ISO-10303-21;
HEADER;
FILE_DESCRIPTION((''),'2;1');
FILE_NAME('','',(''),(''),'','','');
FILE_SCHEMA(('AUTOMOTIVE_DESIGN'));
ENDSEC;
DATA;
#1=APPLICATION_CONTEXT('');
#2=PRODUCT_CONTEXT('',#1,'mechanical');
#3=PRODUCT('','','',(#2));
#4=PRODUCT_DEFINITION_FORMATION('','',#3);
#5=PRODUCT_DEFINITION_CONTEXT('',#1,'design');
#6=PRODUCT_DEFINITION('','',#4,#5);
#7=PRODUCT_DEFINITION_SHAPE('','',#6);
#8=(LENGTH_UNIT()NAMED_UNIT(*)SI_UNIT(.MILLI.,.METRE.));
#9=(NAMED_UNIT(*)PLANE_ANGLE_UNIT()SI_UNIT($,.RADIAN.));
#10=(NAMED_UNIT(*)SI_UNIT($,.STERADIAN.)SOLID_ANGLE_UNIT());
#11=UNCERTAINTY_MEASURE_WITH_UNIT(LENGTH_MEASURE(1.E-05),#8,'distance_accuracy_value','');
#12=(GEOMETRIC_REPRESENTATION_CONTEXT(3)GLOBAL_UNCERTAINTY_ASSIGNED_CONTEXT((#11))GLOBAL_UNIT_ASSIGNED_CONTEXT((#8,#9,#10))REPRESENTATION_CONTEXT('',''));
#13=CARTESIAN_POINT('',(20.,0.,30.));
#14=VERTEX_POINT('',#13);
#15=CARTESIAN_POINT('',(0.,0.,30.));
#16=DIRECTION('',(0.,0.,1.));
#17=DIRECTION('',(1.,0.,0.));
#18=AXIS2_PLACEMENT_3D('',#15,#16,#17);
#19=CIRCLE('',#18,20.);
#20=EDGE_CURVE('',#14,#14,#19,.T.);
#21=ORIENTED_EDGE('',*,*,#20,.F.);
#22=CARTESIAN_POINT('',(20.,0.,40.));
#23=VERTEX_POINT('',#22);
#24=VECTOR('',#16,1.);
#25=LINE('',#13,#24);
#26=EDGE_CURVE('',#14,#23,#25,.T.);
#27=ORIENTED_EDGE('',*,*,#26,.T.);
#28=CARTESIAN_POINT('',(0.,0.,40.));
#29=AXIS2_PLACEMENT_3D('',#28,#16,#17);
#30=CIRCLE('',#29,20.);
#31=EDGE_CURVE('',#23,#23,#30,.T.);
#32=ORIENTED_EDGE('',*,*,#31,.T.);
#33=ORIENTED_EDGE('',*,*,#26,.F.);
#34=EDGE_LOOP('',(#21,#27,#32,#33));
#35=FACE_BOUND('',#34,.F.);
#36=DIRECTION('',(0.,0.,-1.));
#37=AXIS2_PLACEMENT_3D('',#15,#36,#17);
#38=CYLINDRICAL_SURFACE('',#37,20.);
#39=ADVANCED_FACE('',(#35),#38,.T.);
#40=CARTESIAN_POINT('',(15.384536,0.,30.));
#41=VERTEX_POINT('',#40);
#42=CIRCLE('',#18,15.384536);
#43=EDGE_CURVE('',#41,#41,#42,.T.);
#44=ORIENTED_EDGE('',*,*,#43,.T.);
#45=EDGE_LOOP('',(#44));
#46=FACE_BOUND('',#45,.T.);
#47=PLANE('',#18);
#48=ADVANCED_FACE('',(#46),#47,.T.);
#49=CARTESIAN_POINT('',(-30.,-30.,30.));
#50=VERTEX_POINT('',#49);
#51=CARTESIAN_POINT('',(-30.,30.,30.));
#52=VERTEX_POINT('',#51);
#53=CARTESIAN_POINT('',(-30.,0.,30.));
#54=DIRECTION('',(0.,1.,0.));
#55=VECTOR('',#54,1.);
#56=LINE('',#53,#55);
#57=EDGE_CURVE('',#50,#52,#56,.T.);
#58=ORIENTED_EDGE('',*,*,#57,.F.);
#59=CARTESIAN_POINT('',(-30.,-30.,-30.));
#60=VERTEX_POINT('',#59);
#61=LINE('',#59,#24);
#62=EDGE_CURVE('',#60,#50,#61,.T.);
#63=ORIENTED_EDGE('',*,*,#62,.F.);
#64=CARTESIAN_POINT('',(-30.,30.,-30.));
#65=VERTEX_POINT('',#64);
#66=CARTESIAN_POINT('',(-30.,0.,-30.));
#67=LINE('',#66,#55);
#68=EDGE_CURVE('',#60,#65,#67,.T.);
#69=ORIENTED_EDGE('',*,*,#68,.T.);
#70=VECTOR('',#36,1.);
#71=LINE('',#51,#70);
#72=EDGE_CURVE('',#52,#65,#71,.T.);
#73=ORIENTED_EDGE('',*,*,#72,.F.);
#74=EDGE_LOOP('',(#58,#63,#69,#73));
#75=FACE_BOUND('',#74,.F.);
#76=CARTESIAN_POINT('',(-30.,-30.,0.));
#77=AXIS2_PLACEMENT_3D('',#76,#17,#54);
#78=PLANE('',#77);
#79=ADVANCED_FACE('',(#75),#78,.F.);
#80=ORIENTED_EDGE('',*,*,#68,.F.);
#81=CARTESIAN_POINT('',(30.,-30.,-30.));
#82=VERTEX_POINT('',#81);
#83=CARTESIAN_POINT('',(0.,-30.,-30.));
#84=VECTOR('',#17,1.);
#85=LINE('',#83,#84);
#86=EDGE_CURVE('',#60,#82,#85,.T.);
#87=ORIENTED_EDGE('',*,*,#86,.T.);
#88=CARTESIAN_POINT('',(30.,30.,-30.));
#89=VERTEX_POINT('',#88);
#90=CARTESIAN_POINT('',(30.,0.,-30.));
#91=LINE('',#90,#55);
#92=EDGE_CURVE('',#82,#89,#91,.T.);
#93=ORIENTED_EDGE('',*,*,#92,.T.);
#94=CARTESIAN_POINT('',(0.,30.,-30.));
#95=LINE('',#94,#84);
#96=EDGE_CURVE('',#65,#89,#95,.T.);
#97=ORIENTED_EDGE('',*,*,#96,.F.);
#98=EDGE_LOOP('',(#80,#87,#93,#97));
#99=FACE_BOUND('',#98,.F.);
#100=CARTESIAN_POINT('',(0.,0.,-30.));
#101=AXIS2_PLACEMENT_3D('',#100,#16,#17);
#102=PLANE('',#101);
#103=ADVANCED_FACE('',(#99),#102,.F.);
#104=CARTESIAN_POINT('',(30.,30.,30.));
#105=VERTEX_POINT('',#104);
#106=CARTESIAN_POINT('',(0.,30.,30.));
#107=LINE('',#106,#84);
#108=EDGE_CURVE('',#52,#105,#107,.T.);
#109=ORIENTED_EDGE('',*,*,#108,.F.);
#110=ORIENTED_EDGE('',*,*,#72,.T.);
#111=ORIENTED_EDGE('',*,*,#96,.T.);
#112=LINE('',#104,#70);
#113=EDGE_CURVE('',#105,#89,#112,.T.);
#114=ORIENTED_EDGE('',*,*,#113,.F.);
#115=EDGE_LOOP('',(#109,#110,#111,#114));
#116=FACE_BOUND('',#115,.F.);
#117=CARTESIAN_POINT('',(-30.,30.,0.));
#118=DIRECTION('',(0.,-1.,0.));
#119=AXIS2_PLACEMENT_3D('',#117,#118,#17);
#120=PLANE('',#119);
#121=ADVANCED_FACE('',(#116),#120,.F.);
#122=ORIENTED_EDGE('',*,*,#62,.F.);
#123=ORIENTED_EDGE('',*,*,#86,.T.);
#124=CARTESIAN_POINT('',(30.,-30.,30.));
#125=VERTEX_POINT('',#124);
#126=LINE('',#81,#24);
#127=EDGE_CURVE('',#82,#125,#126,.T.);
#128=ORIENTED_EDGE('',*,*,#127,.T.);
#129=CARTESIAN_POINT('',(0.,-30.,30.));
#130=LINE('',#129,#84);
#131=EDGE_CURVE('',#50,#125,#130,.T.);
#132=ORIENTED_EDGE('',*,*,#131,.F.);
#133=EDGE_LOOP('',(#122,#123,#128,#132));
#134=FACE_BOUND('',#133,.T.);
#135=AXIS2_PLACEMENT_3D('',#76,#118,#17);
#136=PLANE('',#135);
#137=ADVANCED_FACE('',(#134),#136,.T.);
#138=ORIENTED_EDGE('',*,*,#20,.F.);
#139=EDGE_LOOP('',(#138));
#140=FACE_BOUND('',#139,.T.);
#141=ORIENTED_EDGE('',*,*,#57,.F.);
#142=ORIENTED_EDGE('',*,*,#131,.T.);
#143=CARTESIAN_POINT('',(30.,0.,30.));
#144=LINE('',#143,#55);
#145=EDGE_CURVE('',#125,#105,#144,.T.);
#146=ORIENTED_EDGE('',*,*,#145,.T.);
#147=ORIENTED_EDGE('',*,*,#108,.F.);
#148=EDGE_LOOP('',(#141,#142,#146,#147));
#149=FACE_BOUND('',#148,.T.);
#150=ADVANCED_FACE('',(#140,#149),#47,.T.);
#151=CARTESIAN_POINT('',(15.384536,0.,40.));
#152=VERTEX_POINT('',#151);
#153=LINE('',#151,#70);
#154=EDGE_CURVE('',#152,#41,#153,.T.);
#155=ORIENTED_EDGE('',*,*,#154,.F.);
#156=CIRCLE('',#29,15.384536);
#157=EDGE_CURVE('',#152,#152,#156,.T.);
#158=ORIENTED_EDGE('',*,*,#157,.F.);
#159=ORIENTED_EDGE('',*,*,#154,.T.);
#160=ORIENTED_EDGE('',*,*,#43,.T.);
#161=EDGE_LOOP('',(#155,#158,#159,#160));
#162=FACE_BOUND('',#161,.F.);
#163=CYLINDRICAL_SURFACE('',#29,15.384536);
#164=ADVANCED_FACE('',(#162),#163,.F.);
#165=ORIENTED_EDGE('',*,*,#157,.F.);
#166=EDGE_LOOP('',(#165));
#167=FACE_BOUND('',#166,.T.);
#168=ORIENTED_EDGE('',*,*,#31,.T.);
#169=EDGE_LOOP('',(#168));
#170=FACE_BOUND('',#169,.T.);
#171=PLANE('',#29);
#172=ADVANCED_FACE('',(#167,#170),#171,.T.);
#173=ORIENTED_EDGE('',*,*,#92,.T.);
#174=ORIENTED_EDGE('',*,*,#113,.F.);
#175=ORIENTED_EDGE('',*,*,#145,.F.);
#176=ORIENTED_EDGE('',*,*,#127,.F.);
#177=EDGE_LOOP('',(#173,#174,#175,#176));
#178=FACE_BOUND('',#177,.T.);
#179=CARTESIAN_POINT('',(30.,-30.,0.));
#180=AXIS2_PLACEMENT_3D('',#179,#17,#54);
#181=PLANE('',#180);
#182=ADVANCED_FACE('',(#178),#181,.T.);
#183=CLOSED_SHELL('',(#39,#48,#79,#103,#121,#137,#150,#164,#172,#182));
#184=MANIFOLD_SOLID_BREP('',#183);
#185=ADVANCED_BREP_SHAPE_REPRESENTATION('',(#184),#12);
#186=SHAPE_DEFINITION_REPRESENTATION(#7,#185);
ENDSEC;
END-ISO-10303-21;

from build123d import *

# Parameters (mm, degrees)
F0_W     = 60
F0_H     = 60
F1_DEPTH = 30
F2_DEPTH = 30
F3_R     = 20
F4_DEPTH = 10
F6_R     = 15.3845355262
F7_DEPTH = 10
F8_W     = 60
F8_H     = 60
F9_DEPTH = 4


with BuildPart() as f1:
    # F0 (on Top) → F1 (new body)
    with BuildSketch(Plane.XY):
        Rectangle(F0_W, F0_H)
    extrude(amount=F1_DEPTH)

    # F2 (add): a face of the model
    f2_faces = [f1.faces().sort_by_distance(p)[0] for p in [
        (0, 0, 0),
    ]]
    extrude(f2_faces, amount=F2_DEPTH)

    # F3 (on face) → F4 (join)
    with BuildSketch(Plane.XY.offset(30)):
        Circle(F3_R)
    extrude(amount=F4_DEPTH)

    # F6 (on face) → F7 (cut)
    with BuildSketch(Plane.XY.offset(40)):
        Circle(F6_R)
    extrude(amount=-F7_DEPTH, mode=Mode.SUBTRACT)

    # F8 (on face) → F9 (cut)
    with BuildSketch(Plane(origin=(0, 30, 0), x_dir=(-1, 0, 0), z_dir=(0, 1, 0))):
        Rectangle(F8_W, F8_H)
    extrude(amount=F9_DEPTH, mode=Mode.SUBTRACT)


solid = f1.part
